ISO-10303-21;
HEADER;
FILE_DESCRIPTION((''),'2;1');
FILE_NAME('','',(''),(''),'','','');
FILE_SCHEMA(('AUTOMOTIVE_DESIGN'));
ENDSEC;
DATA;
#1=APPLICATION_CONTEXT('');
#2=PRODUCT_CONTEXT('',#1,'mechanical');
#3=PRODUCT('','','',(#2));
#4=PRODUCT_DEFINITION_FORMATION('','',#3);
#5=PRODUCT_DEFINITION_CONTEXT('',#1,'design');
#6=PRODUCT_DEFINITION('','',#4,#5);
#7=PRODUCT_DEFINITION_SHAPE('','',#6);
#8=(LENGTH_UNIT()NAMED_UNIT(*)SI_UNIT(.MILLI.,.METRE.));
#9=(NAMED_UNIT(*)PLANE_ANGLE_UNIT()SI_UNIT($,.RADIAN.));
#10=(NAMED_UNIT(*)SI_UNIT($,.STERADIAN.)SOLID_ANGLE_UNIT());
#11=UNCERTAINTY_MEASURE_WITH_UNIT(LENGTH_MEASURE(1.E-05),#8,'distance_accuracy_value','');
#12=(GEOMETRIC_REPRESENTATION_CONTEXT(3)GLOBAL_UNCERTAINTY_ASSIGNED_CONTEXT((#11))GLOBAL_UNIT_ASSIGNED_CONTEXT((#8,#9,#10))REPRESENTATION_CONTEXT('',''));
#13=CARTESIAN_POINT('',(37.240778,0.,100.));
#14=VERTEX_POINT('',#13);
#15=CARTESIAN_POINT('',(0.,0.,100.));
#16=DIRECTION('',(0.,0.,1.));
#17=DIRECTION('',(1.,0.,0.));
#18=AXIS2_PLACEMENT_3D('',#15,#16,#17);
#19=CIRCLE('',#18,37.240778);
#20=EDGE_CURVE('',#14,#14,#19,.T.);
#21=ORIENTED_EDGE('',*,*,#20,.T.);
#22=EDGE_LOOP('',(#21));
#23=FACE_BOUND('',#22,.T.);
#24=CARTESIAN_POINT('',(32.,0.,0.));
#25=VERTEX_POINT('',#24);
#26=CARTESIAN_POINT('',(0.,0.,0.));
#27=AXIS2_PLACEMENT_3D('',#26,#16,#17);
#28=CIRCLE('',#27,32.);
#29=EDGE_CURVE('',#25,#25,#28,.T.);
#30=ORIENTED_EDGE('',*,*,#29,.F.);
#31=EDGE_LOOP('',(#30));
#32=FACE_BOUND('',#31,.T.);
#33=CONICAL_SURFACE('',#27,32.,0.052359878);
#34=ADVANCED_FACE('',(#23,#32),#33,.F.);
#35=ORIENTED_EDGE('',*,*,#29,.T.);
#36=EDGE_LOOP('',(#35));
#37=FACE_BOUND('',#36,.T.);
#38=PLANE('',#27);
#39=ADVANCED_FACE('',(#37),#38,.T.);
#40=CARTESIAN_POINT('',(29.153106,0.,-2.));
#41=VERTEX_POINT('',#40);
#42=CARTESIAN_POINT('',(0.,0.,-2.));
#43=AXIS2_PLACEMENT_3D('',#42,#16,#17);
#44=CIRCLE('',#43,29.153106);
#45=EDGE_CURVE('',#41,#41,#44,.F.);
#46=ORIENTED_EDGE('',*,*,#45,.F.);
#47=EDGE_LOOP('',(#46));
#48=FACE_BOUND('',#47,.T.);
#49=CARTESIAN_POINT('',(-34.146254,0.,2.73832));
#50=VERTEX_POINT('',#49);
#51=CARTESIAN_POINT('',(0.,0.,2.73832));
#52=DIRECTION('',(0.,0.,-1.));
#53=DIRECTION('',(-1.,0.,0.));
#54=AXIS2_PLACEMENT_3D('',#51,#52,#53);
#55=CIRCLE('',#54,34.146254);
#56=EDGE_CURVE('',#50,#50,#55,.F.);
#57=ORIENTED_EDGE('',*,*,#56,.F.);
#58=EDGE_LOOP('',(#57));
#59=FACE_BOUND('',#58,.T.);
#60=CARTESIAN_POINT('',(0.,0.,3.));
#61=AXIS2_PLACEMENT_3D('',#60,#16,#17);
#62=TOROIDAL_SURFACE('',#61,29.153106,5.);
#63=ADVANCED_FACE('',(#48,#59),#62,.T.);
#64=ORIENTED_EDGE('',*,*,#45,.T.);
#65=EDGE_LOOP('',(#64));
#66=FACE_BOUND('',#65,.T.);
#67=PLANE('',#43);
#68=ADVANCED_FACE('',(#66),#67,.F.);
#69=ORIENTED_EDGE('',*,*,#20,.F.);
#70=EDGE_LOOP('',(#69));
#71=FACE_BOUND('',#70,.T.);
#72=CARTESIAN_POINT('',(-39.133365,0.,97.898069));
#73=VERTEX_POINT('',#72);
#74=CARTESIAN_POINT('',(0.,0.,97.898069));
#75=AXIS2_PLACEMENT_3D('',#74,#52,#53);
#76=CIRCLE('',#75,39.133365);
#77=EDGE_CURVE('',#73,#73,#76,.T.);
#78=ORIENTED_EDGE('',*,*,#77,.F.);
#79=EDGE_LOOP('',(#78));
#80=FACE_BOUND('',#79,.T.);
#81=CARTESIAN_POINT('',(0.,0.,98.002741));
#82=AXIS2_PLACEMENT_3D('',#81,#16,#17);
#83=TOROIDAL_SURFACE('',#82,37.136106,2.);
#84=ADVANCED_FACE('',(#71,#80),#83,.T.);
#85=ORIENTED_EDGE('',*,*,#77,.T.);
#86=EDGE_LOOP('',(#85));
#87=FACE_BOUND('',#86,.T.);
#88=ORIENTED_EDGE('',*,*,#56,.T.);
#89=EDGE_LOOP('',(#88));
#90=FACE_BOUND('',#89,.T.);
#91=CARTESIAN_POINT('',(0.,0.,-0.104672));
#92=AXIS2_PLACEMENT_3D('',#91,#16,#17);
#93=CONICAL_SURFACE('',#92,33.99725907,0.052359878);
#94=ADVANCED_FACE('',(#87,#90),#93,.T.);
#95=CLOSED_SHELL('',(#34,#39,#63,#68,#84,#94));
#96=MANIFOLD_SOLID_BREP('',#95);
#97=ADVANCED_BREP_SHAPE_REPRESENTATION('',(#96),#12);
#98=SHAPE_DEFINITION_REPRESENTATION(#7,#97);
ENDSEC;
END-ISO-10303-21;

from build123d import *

# Parameters (mm, degrees)
ESQUISSE1_R        = 32
BOSS_EXTRU_1_DEPTH = 100
BOSS_EXTRU_1_DRAFT = -3
COQUE3_T           = 2
CONG_7_R           = 2


with BuildPart() as part:
    # Esquisse1 → Boss.-Extru.1 (with draft: the straight prism first)
    with BuildSketch(Plane.XY):
        Circle(ESQUISSE1_R)
    extrude(amount=BOSS_EXTRU_1_DEPTH)
    # Boss.-Extru.1: the draft: its side faces are tilted about the plane it starts from
    boss_extru_1_sides = [part.faces().sort_by_distance(p)[0] for p in [
        (-32, 0, 50),
    ]]
    draft(boss_extru_1_sides, Plane.XY, BOSS_EXTRU_1_DRAFT)

    # Coque3
    coque3_openings = [part.faces().sort_by_distance(p)[0] for p in [
        (0, 0, 100),
    ]]
    offset(amount=COQUE3_T, openings=coque3_openings, kind=Kind.INTERSECTION)

    # Congé6: read off the stored shape, not the designer's step
    # Congé6 outline → Congé6 (revolve, cut)
    with BuildSketch(Plane.XZ):
        with BuildLine():
            ThreePointArc((34.146253974, 2.738320219), (32.594879178, -0.626871855), (29.1531063, -2))
            Line((29.1531063, -2), (34.146253974, -2))
            Line((34.146253974, -2), (34.146253974, 2.738320219))
        make_face()
    revolve(axis=Axis((0, 0, 0), (0, 0, 1)), mode=Mode.SUBTRACT)

    # Congé7
    # the kernel refuses this fillet: 2 mm, written as the material it takes off along each edge
    with BuildSketch(Plane(origin=(0, 0, 100), x_dir=(1, 0, 0), z_dir=(0, 1, 0))) as cong_7_piece_1:
        with BuildLine():
            CenterArc((37.136106016, 1.99725907), CONG_7_R, 273, 90)
            Line((39.133365085, 2.101930982), (39.173310267, 2.10402442))
            Line((39.173310267, 2.10402442), (39.283467802, 0.002093438))
            Line((39.283467802, 0.002093438), (39.24352262, -0.04))
            ThreePointArc((39.24352262, -0.04), (38.242150274, -0.04), (37.242871367, -0.039945181))
            Line((37.242871367, -0.039945181), (37.240777928, 0))
        make_face()
    revolve(axis=Axis((0, 0, 100), (0, 0, -1)), mode=Mode.SUBTRACT)


solid = part.part
